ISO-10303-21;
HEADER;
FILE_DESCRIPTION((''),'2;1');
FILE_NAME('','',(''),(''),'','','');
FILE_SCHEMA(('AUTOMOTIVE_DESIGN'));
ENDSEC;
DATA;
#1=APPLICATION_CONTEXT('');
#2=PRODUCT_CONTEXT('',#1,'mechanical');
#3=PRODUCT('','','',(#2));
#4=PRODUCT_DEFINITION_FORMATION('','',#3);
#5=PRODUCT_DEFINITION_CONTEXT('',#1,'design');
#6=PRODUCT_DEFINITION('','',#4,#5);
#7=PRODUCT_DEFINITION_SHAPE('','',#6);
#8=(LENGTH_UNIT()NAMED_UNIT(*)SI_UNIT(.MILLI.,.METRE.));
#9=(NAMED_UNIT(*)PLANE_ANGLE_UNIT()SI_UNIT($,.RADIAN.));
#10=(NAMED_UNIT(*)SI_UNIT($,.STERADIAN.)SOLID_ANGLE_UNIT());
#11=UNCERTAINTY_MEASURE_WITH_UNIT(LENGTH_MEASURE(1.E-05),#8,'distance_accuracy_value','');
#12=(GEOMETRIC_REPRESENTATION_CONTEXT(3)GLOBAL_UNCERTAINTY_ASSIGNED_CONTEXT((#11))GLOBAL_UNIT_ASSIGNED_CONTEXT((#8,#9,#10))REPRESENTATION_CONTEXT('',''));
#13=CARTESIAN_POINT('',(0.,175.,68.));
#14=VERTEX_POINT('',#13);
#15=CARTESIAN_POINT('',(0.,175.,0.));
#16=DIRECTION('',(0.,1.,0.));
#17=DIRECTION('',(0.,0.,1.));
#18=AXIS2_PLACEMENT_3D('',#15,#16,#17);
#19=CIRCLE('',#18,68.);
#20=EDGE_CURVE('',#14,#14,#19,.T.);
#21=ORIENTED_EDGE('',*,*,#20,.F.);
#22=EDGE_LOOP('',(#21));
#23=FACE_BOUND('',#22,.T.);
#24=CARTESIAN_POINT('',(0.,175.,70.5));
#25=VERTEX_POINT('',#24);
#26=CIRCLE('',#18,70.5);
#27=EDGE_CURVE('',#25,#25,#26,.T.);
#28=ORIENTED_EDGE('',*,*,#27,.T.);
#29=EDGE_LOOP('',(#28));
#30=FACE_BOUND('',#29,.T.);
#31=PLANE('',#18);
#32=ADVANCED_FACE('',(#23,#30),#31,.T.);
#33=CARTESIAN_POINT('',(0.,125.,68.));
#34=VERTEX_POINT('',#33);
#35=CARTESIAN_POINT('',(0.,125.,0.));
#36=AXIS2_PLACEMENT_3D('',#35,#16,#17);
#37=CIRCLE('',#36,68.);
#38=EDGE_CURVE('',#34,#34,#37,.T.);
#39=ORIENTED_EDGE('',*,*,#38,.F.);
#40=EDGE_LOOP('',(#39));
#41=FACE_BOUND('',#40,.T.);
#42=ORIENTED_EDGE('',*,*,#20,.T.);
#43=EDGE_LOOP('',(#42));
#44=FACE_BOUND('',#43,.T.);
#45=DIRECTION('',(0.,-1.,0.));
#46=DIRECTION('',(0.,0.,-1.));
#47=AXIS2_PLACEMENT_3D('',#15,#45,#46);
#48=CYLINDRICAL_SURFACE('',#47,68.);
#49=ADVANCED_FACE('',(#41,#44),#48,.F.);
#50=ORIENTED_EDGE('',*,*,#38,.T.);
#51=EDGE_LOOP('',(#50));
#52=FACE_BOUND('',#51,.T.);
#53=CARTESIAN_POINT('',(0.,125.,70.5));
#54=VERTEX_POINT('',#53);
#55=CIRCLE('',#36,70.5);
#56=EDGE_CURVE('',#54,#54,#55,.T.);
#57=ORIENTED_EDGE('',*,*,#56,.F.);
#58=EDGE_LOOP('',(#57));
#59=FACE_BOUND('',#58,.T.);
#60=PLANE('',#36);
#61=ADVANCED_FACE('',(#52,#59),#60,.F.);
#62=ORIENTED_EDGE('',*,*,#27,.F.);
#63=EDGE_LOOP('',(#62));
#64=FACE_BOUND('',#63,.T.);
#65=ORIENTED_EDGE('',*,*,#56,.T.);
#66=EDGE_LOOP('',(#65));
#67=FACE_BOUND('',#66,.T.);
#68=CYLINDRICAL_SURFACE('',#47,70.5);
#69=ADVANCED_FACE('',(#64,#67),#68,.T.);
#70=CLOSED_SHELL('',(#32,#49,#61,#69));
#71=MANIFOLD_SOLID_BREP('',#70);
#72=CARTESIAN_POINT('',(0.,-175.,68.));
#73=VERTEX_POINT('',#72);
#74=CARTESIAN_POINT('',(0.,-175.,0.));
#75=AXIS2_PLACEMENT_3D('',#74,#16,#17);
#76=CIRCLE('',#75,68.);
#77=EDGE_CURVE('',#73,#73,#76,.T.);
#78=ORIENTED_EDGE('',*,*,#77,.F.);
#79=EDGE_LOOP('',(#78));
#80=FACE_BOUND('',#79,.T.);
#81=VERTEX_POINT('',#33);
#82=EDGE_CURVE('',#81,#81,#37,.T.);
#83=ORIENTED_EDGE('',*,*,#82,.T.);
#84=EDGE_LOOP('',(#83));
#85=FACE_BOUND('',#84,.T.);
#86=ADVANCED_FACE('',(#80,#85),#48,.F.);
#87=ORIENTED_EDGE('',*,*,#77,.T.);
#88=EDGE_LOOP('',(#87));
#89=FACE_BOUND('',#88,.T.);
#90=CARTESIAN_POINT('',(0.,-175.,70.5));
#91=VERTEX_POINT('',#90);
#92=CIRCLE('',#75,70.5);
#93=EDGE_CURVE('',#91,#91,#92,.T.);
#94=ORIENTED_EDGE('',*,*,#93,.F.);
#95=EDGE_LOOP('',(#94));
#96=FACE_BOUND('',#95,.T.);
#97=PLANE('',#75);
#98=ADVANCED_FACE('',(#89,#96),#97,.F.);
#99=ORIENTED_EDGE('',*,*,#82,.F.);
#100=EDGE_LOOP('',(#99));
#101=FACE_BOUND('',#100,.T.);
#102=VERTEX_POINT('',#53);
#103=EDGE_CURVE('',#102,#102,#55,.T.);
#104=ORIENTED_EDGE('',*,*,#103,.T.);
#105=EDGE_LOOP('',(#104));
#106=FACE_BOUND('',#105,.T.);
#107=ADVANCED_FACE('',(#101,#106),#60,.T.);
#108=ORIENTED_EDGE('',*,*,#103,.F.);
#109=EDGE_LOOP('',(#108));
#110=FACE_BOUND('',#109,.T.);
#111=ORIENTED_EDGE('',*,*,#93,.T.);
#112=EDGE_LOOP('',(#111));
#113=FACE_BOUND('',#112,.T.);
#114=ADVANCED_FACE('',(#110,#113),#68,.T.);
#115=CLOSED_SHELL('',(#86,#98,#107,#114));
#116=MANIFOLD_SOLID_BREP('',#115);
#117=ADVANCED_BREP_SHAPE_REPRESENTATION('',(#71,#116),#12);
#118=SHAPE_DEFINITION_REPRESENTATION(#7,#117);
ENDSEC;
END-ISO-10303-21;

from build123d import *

# Parameters (mm, degrees)
SKETCH2_R           = 70.5
SKETCH2_R_2         = 68
BOSS_EXTRUDE1_DEPTH = 175


# Read off the part's stored shape, not the designer's step: Split1
with BuildPart() as part:
    # Sketch2 → Boss-Extrude1 (new, symmetric)
    with BuildSketch(Plane(origin=(0, 0, 0), x_dir=(1, 0, 0), z_dir=(0, 1, 0))):
        with Locations(Location((0, 0, 0), (0, 0, 270))):
            Circle(SKETCH2_R)
        with Locations(Location((0, 0, 0), (0, 0, 270))):
            Circle(SKETCH2_R_2, mode=Mode.SUBTRACT)
    extrude(amount=BOSS_EXTRUDE1_DEPTH, both=True)


with BuildPart() as body_2:
    # Split1: the piece on the far side of the plane
    add(part.part)
    split(bisect_by=Plane(origin=(0, 125, 0), x_dir=(1, 0, 0), z_dir=(0, 1, 0)), keep=Keep.BOTTOM)


with BuildPart() as part_1:
    add(part.part)

    # Split1
    split(bisect_by=Plane(origin=(0, 125, 0), x_dir=(1, 0, 0), z_dir=(0, 1, 0)), keep=Keep.TOP)


solid = Compound([body_2.part, part_1.part])
